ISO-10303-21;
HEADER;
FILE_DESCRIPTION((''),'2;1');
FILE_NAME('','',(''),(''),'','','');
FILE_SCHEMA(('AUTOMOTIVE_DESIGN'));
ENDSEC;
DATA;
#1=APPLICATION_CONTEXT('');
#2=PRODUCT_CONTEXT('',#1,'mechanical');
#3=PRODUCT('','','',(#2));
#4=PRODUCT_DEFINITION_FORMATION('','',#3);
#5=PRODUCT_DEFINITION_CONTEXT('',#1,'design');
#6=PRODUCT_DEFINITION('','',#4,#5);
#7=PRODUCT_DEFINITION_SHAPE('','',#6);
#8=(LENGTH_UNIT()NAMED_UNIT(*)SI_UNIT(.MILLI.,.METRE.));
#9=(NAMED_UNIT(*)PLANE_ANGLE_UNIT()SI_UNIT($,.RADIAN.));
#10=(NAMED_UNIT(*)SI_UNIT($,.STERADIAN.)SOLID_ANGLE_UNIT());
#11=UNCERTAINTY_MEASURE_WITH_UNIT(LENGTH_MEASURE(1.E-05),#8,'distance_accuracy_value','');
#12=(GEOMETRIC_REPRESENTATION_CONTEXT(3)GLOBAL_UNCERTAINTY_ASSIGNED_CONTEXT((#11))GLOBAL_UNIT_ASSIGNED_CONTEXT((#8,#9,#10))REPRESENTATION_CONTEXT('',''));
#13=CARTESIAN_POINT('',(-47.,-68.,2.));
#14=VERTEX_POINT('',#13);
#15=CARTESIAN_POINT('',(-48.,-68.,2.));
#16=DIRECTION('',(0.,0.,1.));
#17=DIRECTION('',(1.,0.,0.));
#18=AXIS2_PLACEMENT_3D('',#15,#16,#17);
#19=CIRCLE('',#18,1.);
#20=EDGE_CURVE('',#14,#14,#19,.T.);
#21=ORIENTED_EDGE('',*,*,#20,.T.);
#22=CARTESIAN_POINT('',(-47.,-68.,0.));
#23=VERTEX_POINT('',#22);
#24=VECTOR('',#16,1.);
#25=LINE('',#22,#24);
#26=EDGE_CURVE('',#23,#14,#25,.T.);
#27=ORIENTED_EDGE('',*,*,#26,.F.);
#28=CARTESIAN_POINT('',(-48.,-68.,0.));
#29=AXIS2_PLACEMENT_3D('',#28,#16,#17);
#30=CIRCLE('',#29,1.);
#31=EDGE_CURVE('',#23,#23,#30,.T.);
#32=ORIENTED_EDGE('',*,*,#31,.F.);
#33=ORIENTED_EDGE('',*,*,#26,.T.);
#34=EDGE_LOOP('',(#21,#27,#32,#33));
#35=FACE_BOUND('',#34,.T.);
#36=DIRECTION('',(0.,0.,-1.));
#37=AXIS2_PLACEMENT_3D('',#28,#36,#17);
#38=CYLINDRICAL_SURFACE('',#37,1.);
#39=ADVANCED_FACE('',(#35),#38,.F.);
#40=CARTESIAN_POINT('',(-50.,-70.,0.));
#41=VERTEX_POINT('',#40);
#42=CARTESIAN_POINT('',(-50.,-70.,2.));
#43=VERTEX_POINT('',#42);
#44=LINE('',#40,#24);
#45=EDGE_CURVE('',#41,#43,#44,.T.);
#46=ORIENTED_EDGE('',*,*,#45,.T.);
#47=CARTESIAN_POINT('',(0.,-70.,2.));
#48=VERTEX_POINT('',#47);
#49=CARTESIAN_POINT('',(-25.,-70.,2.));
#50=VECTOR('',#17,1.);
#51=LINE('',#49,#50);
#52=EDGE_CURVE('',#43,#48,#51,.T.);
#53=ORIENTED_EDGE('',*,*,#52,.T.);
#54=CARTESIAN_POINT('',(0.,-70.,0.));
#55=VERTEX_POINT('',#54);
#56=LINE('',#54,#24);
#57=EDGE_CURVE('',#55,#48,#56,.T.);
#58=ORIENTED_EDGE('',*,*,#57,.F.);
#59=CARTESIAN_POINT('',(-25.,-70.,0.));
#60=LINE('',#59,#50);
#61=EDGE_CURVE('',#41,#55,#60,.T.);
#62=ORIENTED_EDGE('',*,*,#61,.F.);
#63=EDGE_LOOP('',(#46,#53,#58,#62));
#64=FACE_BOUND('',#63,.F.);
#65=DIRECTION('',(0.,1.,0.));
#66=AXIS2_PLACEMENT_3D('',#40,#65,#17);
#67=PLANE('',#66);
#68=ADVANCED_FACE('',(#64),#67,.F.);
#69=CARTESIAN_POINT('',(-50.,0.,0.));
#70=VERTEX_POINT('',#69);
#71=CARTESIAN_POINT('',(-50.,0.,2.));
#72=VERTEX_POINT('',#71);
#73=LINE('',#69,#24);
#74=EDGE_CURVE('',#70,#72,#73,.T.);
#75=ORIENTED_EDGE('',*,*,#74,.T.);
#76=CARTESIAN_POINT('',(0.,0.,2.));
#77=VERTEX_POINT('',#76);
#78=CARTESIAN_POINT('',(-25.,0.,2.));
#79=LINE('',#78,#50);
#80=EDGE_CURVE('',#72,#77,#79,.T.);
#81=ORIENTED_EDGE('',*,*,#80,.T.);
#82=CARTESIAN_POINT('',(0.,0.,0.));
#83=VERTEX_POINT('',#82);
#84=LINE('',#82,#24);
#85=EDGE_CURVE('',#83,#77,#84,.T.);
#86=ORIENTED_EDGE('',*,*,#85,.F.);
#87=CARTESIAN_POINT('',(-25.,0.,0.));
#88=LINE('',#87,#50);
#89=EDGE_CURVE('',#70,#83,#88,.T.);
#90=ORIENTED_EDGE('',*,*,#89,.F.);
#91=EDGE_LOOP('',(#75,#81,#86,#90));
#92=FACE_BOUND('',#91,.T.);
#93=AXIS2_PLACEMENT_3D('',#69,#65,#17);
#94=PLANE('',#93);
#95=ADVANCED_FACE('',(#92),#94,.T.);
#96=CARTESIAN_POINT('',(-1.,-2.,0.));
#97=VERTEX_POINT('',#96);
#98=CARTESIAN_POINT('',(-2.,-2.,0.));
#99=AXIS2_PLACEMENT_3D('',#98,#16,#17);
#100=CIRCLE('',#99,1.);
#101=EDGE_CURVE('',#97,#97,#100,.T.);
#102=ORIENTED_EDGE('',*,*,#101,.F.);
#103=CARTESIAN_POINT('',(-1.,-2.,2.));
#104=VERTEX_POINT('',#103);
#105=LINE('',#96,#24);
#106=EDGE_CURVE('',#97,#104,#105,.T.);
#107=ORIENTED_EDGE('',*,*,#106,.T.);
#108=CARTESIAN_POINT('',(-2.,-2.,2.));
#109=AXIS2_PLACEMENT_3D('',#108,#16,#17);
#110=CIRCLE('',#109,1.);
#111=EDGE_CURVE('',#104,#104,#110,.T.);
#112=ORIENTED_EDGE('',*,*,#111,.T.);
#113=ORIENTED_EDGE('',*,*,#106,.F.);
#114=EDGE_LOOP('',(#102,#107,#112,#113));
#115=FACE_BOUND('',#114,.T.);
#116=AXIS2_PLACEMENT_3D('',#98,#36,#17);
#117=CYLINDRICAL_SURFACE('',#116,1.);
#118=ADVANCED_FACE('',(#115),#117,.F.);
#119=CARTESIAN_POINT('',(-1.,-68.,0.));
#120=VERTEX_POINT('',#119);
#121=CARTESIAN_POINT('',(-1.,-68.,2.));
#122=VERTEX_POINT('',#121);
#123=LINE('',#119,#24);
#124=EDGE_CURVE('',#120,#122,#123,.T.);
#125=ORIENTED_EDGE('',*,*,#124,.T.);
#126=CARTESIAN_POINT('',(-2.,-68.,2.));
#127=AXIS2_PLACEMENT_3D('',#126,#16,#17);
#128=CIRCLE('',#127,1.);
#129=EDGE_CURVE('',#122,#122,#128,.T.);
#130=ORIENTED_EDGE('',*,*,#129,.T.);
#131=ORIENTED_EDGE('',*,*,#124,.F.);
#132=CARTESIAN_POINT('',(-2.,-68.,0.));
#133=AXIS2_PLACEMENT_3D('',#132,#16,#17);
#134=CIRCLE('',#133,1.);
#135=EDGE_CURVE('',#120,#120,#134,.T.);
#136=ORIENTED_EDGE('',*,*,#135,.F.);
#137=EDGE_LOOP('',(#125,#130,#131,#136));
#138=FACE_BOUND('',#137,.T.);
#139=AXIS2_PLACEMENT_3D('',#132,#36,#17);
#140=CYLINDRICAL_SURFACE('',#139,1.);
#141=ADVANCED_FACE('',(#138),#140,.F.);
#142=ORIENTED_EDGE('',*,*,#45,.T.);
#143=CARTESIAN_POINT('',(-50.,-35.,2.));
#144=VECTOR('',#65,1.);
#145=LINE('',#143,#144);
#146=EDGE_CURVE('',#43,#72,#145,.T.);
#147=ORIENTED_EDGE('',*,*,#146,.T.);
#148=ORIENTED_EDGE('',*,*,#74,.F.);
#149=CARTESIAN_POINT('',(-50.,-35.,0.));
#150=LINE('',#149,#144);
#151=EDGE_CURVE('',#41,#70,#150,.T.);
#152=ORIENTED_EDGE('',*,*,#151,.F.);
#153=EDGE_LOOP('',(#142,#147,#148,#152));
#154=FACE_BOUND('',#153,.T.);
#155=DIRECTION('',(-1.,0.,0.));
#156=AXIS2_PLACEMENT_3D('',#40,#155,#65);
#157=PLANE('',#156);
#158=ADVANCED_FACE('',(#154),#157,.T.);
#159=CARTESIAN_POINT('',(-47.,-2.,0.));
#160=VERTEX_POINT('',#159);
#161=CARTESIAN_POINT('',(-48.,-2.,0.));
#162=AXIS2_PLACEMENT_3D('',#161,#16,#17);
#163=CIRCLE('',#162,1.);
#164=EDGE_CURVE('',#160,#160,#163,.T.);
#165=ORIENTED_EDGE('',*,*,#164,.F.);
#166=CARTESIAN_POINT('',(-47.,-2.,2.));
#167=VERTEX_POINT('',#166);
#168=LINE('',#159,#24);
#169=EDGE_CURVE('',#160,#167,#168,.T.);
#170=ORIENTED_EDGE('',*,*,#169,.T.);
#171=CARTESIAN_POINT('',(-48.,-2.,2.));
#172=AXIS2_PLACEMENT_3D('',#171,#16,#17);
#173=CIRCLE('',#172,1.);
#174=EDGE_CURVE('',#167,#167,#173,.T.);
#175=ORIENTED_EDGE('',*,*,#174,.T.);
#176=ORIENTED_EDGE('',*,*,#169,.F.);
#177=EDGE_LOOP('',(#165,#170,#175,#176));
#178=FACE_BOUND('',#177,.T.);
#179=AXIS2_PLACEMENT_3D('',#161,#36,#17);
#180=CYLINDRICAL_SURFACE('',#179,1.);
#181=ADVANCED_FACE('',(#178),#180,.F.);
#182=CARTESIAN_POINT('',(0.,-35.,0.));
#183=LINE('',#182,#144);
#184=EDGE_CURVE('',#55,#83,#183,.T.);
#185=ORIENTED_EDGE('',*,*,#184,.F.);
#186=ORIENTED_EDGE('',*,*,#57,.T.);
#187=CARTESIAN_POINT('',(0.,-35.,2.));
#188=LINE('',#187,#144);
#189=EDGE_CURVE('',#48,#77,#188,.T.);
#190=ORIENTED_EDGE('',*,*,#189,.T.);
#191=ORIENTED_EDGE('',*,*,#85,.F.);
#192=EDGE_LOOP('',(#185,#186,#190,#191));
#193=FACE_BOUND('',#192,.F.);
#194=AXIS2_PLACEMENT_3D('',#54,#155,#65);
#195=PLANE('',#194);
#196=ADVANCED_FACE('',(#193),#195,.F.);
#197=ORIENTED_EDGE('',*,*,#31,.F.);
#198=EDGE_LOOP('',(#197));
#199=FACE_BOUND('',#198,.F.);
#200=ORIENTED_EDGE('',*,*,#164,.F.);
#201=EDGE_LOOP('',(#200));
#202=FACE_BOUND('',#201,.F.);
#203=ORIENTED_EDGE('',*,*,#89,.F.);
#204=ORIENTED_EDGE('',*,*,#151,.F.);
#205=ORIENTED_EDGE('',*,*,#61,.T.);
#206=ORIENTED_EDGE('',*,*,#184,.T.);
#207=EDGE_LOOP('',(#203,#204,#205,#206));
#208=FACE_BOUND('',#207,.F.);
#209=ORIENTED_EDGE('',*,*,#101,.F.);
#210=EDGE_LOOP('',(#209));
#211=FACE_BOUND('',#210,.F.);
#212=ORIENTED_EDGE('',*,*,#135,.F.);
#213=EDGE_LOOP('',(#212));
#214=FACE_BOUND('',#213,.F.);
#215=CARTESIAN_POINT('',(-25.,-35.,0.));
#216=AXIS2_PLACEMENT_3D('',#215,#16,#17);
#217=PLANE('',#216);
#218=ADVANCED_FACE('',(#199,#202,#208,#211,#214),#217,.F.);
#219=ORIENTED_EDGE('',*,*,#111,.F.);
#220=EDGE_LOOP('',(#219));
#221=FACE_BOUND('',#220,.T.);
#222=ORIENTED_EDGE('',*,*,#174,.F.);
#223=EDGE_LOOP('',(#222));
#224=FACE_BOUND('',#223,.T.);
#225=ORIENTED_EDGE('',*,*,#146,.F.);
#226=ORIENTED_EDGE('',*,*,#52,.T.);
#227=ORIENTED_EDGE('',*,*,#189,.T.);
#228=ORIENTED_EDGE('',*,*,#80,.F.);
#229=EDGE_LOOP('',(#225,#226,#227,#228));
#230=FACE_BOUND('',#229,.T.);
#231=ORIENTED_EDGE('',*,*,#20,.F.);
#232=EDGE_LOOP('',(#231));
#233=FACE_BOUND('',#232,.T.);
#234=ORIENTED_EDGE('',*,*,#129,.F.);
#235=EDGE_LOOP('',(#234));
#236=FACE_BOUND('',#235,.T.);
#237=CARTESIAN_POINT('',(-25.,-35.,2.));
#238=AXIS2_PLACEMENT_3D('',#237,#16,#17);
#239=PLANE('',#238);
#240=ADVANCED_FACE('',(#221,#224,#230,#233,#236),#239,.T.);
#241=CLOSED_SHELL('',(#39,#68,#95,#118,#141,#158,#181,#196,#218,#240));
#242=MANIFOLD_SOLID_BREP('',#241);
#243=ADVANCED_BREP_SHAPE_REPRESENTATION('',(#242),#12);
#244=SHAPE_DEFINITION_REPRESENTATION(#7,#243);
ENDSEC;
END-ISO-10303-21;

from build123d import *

# Parameters (mm, degrees)
F3_W     = 50
F3_H     = 70
F3_R     = 1
F4_DEPTH = 2


# Not quite as in the source:
# - the program builds the solid bodies; features that only make, move or delete a surface that nothing else refers to are left out


with BuildPart() as f4:
    # F3 (on Top) → F4 (new body)
    with BuildSketch(Plane.XY):
        with Locations((-25, -35)):
            Rectangle(F3_W, F3_H)
        with Locations((-48, -68)):
            Circle(F3_R, mode=Mode.SUBTRACT)
        with Locations((-2, -68)):
            Circle(F3_R, mode=Mode.SUBTRACT)
        with Locations((-48, -2)):
            Circle(F3_R, mode=Mode.SUBTRACT)
        with Locations((-2, -2)):
            Circle(F3_R, mode=Mode.SUBTRACT)
    extrude(amount=F4_DEPTH)


solid = f4.part
